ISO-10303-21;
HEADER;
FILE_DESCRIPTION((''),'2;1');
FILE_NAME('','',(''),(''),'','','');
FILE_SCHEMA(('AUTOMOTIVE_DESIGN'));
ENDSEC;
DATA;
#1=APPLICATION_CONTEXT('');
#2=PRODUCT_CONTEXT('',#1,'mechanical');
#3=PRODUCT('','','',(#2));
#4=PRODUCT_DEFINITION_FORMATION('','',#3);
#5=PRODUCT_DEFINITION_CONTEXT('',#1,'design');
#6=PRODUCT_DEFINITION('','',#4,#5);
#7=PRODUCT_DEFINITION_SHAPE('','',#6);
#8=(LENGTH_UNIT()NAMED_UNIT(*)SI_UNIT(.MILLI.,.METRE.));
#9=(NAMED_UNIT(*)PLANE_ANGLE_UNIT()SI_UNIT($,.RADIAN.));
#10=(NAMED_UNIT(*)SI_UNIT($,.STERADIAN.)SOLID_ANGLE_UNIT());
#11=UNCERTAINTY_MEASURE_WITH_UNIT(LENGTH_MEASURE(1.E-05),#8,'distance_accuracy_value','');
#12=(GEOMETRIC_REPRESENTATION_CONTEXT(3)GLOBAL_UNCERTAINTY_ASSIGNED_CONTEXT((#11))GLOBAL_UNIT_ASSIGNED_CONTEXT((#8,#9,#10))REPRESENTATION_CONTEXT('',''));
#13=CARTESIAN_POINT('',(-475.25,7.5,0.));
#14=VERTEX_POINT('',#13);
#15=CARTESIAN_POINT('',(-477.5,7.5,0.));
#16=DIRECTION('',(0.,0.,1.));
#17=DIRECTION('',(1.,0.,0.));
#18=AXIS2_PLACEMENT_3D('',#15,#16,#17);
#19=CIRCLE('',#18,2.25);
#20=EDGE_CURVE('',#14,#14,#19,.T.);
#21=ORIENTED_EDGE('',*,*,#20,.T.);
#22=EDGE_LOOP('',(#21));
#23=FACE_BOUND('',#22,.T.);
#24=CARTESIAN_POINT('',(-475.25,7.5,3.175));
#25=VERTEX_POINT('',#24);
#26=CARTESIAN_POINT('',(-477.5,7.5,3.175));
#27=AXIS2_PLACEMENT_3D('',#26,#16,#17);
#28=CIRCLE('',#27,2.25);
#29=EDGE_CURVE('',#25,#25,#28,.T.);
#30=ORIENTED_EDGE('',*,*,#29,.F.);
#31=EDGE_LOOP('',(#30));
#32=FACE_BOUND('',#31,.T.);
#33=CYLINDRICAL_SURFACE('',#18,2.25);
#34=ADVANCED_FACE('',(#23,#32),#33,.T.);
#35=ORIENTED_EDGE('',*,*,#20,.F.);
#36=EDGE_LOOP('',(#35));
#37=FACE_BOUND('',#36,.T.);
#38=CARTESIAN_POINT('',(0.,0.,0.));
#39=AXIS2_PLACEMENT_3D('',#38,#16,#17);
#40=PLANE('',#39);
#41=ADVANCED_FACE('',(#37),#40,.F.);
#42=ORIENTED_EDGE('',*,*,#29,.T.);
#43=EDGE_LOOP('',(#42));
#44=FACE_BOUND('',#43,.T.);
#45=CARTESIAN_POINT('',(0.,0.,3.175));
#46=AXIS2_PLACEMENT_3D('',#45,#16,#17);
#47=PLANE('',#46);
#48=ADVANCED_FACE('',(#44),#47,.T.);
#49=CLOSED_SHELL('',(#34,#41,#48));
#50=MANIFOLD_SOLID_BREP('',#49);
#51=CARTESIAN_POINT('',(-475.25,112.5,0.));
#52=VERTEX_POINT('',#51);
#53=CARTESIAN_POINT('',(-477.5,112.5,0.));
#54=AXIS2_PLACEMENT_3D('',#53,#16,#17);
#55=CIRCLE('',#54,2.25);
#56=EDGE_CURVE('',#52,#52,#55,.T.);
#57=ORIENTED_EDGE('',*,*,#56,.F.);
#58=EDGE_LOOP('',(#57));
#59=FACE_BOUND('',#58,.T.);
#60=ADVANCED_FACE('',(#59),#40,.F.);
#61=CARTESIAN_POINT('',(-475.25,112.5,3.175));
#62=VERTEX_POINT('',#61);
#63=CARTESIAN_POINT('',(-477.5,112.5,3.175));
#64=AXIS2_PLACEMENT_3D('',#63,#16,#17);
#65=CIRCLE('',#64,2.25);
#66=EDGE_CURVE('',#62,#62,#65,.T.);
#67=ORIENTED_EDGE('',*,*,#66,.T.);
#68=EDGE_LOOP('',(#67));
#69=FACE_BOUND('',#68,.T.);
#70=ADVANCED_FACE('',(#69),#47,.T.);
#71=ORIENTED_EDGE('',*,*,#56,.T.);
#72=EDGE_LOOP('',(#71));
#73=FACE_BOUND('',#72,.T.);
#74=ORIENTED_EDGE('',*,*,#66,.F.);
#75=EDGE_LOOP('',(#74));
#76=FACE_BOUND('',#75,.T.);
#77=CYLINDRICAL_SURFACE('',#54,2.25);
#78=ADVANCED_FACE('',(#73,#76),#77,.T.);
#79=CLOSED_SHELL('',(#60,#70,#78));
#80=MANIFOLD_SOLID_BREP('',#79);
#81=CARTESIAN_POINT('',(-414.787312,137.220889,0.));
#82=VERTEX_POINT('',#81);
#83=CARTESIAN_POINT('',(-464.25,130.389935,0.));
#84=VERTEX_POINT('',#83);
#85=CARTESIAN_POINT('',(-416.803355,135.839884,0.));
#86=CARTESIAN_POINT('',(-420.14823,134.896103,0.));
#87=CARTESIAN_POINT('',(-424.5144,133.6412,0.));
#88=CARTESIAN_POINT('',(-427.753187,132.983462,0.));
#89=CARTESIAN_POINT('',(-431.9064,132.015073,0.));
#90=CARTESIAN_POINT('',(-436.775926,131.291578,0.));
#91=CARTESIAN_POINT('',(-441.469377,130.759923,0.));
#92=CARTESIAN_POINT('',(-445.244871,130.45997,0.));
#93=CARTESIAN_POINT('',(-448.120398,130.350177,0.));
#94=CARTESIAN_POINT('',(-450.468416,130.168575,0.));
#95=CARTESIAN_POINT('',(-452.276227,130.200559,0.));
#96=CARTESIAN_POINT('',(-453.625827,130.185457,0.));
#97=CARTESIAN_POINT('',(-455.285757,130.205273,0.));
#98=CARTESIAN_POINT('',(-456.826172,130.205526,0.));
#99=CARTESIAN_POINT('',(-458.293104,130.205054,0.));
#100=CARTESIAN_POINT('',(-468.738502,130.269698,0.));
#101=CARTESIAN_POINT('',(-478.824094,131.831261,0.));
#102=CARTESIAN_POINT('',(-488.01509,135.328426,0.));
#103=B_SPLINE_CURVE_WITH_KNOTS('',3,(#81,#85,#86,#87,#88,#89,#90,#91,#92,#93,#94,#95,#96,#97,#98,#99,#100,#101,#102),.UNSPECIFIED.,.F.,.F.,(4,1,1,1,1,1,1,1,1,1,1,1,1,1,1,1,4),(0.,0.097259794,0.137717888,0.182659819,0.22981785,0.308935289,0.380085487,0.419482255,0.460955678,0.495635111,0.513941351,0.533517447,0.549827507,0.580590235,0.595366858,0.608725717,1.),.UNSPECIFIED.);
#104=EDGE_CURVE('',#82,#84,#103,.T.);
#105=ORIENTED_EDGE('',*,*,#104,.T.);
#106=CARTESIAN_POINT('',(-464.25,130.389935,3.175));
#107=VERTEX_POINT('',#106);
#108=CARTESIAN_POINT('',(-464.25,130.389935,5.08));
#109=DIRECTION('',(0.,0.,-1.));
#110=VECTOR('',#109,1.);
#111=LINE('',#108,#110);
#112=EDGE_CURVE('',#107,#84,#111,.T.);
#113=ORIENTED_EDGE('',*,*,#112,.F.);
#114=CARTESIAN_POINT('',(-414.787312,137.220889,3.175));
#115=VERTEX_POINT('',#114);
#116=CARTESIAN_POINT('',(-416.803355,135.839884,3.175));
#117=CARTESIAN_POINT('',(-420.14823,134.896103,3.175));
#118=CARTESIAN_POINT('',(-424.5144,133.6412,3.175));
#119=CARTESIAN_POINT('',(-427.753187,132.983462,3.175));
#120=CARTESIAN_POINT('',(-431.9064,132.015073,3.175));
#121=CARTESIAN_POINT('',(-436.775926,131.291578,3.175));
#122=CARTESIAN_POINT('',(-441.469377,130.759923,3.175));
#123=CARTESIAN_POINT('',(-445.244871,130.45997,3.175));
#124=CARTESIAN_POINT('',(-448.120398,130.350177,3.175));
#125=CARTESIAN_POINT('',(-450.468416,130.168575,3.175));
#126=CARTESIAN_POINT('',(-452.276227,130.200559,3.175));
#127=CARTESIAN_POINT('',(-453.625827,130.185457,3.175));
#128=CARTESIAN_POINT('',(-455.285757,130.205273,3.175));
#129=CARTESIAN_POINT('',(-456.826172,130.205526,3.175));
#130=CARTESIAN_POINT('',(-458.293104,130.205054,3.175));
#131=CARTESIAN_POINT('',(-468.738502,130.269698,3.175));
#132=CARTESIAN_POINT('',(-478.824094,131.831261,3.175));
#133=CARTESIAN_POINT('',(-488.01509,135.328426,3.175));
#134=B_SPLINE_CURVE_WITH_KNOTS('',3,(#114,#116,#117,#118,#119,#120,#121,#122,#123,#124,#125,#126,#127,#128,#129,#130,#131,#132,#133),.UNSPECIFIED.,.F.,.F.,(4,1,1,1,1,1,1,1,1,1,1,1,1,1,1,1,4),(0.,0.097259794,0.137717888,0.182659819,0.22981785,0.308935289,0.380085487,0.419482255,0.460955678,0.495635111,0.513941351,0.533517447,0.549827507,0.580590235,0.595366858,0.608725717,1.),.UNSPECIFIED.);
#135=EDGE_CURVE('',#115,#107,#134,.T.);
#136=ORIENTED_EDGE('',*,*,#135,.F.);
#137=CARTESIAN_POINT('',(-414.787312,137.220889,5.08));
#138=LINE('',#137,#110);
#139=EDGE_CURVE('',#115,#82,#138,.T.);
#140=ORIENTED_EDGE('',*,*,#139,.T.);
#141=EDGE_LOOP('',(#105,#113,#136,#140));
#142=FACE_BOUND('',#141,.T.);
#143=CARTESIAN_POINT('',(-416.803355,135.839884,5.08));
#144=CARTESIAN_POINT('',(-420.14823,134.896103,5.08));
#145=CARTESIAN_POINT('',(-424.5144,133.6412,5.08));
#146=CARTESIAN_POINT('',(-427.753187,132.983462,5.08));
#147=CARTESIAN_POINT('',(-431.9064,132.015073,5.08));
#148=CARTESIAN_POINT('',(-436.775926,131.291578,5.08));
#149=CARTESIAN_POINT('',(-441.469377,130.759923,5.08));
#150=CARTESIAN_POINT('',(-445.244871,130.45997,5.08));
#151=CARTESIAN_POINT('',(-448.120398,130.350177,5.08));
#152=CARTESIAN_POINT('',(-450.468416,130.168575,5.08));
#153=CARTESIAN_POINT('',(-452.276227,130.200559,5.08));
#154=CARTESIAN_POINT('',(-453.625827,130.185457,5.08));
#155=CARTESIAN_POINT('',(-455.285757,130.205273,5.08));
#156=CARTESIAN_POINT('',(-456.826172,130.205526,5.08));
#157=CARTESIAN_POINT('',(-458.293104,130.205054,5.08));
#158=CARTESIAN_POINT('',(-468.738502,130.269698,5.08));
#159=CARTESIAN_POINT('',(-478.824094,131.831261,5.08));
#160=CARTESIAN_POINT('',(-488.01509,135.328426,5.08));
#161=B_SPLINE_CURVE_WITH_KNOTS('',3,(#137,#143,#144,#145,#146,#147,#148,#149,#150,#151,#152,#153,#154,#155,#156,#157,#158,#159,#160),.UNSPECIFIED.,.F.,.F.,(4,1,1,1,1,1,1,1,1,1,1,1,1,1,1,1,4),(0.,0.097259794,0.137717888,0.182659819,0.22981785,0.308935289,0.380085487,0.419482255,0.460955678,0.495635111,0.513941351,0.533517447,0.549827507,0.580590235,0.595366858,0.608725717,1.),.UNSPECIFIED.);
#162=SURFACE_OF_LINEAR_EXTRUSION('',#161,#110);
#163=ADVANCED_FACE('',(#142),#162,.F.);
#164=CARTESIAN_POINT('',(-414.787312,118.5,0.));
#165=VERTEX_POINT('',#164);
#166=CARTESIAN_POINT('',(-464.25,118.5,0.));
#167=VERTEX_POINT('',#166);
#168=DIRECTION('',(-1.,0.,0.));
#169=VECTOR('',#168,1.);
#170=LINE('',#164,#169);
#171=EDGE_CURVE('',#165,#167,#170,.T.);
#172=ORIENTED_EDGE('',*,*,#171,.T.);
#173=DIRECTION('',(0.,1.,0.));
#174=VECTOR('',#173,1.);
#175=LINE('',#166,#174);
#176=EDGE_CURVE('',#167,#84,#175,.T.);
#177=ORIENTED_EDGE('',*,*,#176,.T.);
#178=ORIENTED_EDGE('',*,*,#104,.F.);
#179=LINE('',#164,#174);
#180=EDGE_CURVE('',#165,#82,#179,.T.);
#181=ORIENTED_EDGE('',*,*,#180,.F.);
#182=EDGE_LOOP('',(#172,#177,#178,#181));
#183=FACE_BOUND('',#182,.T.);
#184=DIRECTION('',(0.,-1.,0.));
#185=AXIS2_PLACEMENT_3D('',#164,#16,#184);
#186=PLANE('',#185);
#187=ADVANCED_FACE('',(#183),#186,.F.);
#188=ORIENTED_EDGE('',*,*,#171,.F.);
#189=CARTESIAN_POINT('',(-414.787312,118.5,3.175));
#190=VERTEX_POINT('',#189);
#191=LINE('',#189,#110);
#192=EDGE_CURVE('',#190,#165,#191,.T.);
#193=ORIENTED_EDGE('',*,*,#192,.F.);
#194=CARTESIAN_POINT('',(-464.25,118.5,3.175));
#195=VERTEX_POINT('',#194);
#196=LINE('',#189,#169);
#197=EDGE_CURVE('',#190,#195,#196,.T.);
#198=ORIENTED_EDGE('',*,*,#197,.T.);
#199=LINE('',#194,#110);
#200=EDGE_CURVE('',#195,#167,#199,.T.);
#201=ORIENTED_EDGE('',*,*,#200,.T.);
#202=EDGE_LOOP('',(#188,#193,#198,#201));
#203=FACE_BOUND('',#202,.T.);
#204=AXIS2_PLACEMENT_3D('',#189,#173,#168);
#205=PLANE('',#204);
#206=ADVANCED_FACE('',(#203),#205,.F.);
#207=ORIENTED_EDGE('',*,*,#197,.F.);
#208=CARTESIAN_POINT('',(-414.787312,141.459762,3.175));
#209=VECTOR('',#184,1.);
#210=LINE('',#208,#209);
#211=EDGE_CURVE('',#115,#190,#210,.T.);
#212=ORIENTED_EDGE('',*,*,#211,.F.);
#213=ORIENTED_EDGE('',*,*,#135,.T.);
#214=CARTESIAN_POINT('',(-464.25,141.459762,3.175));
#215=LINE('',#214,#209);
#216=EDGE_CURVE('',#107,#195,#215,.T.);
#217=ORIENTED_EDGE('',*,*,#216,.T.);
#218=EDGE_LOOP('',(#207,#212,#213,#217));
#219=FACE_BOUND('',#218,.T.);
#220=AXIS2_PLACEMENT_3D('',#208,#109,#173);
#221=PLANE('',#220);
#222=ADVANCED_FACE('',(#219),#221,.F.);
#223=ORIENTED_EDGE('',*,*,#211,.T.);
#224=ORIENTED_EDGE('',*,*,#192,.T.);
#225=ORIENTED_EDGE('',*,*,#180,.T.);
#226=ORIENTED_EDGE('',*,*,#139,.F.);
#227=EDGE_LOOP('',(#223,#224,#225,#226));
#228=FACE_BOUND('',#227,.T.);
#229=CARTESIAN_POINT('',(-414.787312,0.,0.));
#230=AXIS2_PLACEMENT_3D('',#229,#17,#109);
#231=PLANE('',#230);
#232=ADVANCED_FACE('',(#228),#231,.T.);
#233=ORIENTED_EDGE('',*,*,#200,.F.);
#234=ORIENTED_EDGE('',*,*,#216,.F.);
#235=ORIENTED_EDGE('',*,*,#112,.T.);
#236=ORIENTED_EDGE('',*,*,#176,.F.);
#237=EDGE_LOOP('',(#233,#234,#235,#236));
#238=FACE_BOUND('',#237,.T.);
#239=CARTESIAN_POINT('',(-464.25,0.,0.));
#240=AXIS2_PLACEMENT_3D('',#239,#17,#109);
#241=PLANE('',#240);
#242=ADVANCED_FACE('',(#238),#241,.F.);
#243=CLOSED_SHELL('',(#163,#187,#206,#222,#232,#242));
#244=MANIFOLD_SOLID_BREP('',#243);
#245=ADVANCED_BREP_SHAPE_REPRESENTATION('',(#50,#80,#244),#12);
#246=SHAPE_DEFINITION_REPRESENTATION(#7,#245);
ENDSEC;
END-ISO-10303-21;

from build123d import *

# Parameters (mm, degrees)
F_3DSKETCH1_R         = 2.25
BOSS_EXTRUDE1_DEPTH   = 3.175
BOSS_EXTRUDE1_2_DEPTH = 3.175
SKETCH1_W             = 3.175
SKETCH1_H             = 22.959761953
BOSS_EXTRUDE2_DEPTH   = 49.462687847
CUT_EXTRUDE1_DEPTH    = 5.08


with BuildPart() as part:
    # 3DSketch1 → Boss-Extrude1 (new body)
    with BuildSketch(Plane(origin=(-464.25, 116.5, 0), x_dir=(-0.27427932364426477, -0.9616500676551969, 0), z_dir=(0, 0, -1))):
        with Locations(Location((108.454058413, -17.154582881, 0), (0, 0, 254.080928829))):
            Circle(F_3DSKETCH1_R)
    extrude(amount=-BOSS_EXTRUDE1_DEPTH)


with BuildPart() as body_2:
    # 3DSketch1 → Boss-Extrude1 2 (new body)
    with BuildSketch(Plane(origin=(-464.25, 116.5, 0), x_dir=(-0.27427932364426477, -0.9616500676551969, 0), z_dir=(0, 0, -1))):
        with Locations(Location((7.480801309, 11.644746102, 0), (0, 0, 254.080928829))):
            Circle(F_3DSKETCH1_R)
    extrude(amount=-BOSS_EXTRUDE1_2_DEPTH)


with BuildPart() as body_3:
    # Sketch1 → Boss-Extrude2 (new body)
    with BuildSketch(Plane(origin=(-464.25, 0, 0), x_dir=(0, 0, -1), z_dir=(1, 0, 0))):
        with Locations((-1.5875, 129.979880976)):
            Rectangle(SKETCH1_W, SKETCH1_H)
    extrude(amount=BOSS_EXTRUDE2_DEPTH)

    # Sketch2 → Cut-Extrude1 (cut)
    with BuildSketch(Plane(origin=(0, 0, 0), x_dir=(-1, 0, 0), z_dir=(0, 0, -1))):
        with BuildLine():
            Line((490, 141.459761953), (414.787312153, 141.459761953))
            Line((414.787312153, 141.459761953), (414.787312153, 137.220888891))
            add(Edge.make_bspline(
                [(414.787312153, 137.220888891), (416.803355128, 135.83988374), (420.148230363, 134.896102648), (424.514399841, 133.641199566), (427.753187268, 132.983461779), (431.906399587, 132.015072768), (436.775926001, 131.291578005), (441.469376717, 130.7599234), (445.244870822, 130.459970277), (448.120397534, 130.350176556), (450.468416009, 130.168574827), (452.276227088, 130.200559294), (453.625826876, 130.185456971), (455.28575693, 130.205272665), (456.826171615, 130.20552598), (458.293104177, 130.205053692), (468.73850206, 130.269698355), (478.824094069, 131.831260872), (488.015089833, 135.328425641)],
                knots=[0, 0, 0, 0, 0.097259794, 0.137717888, 0.182659819, 0.22981785, 0.308935289, 0.380085487, 0.419482255, 0.460955678, 0.495635111, 0.513941351, 0.533517447, 0.549827507, 0.580590235, 0.595366858, 0.608725717, 1, 1, 1, 1], degree=3))
            add(Edge.make_bspline(
                [(488.015089833, 135.328425641), (490.915002323, 134.351803739), (493.963481884, 133.638822528), (497.05, 133.883148618)],
                knots=[0, 0, 0, 0, 1, 1, 1, 1], degree=3))
            Line((497.05, 133.883148618), (497.05, 141.459761953))
            Line((497.05, 141.459761953), (490, 141.459761953))
        make_face()
    extrude(amount=-CUT_EXTRUDE1_DEPTH, mode=Mode.SUBTRACT)


solid = Compound([part.part, body_2.part, body_3.part])
